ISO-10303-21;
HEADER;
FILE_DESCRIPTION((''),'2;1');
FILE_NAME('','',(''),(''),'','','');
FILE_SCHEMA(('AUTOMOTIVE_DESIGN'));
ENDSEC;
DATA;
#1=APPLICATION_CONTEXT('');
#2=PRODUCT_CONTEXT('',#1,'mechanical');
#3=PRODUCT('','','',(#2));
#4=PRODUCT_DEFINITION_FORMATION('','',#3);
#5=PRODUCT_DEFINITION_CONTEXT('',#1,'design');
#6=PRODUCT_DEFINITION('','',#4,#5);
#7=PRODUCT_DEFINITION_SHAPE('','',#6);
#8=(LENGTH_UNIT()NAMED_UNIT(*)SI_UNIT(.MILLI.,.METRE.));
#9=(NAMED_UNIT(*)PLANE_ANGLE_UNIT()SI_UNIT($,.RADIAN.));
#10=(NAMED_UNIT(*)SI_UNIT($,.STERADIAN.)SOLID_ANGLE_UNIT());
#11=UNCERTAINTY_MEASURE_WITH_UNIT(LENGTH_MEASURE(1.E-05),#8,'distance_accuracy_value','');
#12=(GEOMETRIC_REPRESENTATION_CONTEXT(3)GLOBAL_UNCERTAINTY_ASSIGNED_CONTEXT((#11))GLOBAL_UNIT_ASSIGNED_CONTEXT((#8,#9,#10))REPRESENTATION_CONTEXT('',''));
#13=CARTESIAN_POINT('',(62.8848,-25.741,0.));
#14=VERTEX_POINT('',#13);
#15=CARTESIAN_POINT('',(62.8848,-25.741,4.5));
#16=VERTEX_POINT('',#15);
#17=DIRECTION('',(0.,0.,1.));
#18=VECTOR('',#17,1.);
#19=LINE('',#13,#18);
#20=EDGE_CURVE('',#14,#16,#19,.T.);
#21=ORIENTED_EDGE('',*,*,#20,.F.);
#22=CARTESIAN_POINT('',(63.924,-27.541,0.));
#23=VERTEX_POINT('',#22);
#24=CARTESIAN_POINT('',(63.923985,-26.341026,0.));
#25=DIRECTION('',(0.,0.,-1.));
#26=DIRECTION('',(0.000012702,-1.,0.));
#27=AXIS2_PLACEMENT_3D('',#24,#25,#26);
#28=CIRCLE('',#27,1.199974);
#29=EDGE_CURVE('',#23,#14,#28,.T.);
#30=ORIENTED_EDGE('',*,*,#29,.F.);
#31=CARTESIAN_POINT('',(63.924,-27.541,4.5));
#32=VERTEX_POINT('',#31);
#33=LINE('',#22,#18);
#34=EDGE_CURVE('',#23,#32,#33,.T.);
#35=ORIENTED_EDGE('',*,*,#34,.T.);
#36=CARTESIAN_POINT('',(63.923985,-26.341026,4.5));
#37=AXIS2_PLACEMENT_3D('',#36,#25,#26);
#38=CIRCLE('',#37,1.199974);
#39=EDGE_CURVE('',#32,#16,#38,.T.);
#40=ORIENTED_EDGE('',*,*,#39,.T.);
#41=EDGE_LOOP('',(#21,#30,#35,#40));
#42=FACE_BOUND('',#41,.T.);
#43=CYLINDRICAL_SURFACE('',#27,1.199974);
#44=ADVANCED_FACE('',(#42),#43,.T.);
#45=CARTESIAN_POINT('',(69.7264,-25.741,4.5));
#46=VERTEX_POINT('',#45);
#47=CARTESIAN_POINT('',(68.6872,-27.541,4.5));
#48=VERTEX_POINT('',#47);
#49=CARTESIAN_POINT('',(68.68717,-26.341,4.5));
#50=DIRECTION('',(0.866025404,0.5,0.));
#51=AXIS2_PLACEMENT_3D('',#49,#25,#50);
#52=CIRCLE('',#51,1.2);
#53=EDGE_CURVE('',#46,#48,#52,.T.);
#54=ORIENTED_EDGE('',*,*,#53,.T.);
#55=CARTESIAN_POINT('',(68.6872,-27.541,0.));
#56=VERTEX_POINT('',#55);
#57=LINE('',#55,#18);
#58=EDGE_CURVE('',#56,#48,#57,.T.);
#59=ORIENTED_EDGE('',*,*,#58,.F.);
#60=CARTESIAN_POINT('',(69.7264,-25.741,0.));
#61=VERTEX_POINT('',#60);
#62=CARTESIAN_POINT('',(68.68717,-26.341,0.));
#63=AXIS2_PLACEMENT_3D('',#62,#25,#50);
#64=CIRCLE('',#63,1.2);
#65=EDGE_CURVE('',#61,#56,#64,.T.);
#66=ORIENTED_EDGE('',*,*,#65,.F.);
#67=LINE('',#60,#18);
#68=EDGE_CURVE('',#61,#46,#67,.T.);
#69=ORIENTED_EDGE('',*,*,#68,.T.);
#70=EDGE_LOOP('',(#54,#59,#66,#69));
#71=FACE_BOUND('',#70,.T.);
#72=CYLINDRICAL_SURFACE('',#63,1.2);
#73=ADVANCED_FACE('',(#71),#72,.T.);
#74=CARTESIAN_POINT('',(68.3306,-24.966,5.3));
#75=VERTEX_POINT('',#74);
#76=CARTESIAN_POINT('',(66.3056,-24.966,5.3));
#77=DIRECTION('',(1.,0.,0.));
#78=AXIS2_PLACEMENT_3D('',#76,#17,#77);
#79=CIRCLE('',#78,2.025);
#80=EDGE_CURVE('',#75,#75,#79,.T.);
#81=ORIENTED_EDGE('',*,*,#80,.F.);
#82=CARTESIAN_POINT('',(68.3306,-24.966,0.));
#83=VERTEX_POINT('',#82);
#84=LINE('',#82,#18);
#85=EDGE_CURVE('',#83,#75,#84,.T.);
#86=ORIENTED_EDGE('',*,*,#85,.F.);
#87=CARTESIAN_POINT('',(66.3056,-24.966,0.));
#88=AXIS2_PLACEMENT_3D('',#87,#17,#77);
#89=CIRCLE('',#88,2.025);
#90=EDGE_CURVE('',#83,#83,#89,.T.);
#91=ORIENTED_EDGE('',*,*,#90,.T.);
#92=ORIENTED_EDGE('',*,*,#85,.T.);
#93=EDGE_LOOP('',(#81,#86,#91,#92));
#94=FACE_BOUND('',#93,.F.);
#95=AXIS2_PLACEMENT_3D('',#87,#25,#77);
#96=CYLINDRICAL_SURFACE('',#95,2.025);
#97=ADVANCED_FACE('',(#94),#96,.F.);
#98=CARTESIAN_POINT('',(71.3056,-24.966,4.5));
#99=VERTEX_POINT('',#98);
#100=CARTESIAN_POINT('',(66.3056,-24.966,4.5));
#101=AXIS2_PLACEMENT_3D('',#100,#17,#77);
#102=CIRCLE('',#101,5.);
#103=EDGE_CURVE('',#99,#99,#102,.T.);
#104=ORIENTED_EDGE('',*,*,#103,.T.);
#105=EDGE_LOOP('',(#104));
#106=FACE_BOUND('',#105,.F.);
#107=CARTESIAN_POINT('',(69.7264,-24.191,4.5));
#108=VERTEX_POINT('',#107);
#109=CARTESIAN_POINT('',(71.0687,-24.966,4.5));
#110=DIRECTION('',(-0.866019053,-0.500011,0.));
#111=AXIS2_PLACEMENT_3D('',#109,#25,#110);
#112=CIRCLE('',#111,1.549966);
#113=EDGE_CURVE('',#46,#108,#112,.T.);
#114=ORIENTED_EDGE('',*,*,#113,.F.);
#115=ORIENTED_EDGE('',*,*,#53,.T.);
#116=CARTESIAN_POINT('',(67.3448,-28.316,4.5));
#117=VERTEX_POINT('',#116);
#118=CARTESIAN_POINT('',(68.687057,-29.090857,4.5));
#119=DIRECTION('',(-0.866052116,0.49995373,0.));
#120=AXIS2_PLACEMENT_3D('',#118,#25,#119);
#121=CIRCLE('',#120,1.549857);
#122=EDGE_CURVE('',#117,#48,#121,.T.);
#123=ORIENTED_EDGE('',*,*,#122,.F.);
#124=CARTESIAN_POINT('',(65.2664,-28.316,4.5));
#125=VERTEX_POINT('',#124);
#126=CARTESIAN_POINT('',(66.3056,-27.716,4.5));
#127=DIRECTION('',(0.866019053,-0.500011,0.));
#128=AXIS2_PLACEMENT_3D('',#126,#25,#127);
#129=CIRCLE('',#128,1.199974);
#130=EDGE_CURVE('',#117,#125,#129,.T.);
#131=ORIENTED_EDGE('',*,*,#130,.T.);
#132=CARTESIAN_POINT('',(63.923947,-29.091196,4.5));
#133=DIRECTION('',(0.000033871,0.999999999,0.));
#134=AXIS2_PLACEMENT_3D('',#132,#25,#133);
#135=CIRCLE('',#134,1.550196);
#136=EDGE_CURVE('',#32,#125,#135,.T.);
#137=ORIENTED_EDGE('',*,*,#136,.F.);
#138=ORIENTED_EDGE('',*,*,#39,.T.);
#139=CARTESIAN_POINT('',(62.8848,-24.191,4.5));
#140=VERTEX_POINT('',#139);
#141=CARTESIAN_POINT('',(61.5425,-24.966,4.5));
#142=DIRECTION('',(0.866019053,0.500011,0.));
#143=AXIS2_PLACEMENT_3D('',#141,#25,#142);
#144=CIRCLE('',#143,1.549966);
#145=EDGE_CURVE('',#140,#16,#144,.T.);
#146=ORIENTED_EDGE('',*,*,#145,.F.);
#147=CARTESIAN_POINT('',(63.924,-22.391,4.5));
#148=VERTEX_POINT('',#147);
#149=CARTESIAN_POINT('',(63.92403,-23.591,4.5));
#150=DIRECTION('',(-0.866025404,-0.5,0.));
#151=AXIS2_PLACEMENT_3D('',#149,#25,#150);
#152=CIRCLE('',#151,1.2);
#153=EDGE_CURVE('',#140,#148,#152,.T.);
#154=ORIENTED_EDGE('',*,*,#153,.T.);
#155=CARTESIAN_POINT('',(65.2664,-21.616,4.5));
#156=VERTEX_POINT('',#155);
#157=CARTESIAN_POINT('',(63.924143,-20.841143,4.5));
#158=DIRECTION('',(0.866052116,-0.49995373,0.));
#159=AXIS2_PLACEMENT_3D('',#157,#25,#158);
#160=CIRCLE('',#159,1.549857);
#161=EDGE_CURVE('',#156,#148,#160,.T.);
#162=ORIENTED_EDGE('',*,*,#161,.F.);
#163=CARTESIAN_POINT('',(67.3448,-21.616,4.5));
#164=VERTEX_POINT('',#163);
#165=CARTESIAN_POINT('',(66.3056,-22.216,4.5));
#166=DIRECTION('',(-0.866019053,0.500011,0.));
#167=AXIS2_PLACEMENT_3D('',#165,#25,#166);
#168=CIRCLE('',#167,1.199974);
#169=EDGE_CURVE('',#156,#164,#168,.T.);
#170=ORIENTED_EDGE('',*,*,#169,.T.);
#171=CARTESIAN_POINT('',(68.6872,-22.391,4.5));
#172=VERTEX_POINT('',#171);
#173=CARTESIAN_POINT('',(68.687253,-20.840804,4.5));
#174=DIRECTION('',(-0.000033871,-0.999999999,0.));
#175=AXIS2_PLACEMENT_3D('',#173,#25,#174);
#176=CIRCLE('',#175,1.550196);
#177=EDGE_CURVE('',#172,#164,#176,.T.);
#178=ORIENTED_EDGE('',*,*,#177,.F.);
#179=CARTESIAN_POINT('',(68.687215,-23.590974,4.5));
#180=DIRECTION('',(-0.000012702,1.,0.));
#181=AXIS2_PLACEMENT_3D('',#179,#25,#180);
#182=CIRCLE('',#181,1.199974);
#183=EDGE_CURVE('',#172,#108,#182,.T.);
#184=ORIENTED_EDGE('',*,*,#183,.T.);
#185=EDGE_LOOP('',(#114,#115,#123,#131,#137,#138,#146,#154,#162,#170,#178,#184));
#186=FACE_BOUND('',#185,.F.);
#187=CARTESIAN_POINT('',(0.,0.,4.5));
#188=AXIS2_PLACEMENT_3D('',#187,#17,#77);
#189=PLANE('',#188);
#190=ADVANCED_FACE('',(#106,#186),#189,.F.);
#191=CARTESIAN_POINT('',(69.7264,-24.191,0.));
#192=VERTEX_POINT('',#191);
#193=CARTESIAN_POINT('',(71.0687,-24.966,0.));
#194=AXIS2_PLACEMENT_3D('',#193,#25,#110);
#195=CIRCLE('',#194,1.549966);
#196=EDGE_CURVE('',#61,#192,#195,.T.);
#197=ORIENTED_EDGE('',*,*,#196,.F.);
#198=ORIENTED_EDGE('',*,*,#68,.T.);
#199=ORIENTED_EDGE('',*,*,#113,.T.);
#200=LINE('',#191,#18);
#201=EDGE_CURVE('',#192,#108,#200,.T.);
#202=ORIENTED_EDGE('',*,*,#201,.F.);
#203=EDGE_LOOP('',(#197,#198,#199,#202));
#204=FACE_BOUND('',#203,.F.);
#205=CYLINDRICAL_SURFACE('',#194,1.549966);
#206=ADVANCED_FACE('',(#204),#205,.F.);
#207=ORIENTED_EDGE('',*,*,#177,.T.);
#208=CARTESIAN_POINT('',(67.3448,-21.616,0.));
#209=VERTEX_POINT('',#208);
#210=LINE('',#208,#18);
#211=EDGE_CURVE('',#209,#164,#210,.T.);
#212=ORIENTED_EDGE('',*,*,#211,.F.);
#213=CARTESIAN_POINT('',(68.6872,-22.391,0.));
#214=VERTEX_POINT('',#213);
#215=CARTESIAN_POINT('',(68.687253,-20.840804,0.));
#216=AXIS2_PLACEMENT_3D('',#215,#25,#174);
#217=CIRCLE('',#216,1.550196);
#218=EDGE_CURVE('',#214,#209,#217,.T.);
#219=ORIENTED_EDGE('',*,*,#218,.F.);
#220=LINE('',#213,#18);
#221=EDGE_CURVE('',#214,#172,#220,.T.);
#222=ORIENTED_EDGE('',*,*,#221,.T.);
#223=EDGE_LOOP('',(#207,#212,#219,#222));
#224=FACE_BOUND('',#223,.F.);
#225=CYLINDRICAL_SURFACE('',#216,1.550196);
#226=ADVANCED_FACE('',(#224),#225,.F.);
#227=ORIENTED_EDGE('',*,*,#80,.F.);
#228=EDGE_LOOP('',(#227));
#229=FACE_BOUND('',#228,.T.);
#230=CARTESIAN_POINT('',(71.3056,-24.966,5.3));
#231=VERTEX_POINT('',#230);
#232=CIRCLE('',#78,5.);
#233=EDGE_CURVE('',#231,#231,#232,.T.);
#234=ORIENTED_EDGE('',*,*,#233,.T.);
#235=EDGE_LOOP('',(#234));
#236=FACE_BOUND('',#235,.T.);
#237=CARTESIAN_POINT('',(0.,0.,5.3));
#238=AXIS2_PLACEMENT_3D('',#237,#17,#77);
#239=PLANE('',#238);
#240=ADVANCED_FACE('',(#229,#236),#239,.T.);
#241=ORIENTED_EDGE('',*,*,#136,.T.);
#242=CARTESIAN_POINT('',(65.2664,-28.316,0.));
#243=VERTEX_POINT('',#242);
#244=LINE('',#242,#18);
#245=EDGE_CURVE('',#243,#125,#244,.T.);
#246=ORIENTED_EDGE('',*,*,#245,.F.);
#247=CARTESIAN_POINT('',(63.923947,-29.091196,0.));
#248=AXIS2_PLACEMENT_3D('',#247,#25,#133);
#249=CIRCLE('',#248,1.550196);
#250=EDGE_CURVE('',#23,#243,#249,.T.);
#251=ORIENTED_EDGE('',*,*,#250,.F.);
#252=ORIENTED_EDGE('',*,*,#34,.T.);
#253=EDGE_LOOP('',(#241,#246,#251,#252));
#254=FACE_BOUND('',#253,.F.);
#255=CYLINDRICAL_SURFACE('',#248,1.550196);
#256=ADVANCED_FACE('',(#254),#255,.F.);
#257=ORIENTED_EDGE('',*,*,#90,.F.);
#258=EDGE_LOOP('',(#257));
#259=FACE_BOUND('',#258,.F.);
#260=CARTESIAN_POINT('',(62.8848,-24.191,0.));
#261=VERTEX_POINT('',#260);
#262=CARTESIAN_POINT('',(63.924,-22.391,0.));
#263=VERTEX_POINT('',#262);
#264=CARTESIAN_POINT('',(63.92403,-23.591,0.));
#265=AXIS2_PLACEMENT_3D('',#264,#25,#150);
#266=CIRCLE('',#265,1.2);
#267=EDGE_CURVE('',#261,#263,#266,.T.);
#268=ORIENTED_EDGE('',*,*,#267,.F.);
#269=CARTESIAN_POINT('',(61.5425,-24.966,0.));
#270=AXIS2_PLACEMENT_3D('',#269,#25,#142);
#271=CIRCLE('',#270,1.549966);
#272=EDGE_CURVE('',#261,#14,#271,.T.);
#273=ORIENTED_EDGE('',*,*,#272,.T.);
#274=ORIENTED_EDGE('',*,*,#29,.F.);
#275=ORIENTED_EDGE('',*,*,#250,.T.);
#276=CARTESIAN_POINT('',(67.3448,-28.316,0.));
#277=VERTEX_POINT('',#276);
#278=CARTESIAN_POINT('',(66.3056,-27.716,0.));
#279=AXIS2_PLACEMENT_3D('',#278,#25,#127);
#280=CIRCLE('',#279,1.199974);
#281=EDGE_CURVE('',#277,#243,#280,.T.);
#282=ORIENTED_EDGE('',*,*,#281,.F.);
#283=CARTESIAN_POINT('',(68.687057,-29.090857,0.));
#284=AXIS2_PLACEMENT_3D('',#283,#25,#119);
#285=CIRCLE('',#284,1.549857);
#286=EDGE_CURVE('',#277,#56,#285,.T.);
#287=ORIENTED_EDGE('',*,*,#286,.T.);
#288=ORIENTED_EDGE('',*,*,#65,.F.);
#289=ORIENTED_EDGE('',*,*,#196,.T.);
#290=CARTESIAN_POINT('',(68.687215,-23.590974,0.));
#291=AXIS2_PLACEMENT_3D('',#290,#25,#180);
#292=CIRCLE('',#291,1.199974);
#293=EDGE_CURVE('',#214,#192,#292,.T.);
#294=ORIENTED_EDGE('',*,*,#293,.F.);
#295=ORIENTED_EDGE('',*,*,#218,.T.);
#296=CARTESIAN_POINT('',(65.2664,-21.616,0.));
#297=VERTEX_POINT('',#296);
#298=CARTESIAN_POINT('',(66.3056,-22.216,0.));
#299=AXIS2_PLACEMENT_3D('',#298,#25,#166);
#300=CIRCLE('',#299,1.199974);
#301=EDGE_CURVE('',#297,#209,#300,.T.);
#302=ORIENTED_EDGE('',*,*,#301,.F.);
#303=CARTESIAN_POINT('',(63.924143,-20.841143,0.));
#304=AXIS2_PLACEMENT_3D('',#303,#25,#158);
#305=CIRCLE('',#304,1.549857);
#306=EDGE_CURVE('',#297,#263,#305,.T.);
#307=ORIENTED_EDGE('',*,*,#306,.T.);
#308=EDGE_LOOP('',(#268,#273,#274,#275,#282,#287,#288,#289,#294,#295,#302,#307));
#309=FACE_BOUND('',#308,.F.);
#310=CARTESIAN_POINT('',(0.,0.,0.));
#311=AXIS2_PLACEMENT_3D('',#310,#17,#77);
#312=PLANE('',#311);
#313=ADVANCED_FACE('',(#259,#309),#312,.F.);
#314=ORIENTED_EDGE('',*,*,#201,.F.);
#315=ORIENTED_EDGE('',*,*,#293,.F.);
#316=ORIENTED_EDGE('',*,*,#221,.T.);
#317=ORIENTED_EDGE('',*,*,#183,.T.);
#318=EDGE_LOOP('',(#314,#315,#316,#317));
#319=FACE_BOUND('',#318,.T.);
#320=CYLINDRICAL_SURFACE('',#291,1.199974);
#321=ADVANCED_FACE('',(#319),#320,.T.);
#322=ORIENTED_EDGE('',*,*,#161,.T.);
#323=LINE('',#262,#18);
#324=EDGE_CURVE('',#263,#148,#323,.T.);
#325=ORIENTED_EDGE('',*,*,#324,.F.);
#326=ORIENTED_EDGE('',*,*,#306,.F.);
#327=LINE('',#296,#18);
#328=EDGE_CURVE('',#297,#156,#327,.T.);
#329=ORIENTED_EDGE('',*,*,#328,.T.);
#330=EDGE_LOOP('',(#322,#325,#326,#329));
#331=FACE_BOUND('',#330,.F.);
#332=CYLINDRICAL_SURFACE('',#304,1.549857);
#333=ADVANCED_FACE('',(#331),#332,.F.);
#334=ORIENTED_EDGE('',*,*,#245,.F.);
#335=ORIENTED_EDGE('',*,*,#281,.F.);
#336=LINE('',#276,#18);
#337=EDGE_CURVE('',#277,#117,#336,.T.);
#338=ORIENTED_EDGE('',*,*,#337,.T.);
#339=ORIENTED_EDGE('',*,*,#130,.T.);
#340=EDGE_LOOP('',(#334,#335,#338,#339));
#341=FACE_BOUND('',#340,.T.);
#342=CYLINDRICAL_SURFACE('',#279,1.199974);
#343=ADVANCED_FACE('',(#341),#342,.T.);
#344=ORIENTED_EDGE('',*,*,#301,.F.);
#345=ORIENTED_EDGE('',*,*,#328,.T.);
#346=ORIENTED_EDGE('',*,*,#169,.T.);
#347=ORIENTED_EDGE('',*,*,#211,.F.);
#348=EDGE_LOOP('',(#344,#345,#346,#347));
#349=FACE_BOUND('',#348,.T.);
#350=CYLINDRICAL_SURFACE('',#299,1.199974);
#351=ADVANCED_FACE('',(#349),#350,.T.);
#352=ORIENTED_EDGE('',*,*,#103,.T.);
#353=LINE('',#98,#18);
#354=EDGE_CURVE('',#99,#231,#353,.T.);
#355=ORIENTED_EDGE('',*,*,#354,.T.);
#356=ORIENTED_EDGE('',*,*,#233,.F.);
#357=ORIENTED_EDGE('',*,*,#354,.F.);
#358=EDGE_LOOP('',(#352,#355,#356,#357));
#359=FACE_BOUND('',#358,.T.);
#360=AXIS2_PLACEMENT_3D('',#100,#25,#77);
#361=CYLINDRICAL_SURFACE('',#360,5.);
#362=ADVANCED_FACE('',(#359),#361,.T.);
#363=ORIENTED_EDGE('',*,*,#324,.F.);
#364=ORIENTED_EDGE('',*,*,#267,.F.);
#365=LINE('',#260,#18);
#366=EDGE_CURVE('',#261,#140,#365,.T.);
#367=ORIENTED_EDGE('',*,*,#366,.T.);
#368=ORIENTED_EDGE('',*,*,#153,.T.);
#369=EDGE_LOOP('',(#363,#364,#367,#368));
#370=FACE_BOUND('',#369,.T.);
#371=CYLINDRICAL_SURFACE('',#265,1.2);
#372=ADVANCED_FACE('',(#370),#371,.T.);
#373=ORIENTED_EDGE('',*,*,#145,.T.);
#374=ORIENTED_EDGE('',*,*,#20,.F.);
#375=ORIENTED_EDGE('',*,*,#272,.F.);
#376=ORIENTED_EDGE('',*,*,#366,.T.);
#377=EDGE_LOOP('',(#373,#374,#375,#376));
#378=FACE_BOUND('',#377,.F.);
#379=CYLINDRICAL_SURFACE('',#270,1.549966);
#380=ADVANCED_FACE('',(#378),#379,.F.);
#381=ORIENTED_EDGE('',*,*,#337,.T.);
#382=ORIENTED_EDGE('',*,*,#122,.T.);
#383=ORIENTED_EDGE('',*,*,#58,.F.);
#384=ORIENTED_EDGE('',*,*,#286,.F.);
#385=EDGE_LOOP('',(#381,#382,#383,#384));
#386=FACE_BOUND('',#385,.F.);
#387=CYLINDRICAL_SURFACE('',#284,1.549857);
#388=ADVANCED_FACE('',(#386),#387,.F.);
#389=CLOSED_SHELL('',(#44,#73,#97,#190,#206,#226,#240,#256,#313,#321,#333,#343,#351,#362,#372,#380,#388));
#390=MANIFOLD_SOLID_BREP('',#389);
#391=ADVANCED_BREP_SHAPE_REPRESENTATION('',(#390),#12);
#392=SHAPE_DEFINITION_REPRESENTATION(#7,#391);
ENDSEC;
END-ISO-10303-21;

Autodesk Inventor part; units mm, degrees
ref_plane "YZ Plane" through (0, 0, 0) normal (1, 0, 0) x (0, 1, 0)
ref_plane "XZ Plane" through (0, 0, 0) normal (0, 1, 0) x (-1, 0, 0)
ref_plane "XY Plane" through (0, 0, 0) normal (0, 0, 1) x (1, 0, 0)
sketch "スケッチ1" plane through (0, 0, 0) normal (0, 0, 1) x (1, 0, 0)
  arc A0 (69.7697, -24.216) -> (68.6872, -22.341) centre (68.6872, -23.591) ccw
  arc A1 (69.7697, -24.216) -> (69.7697, -25.716) centre (71.0687, -24.966) ccw
  arc A2 (68.6872, -27.591) -> (69.7697, -25.716) centre (68.6872, -26.341) ccw
  arc A3 (65.2231, -28.341) -> (67.3881, -28.341) centre (66.3056, -27.716) ccw
  arc A4 (68.6872, -27.591) -> (67.3881, -28.341) centre (68.6872, -29.091) ccw
  arc A5 (65.2231, -28.341) -> (63.924, -27.591) centre (63.924, -29.091) ccw
  arc A6 (63.924, -22.341) -> (62.8415, -24.216) centre (63.924, -23.591) ccw
  arc A7 (63.924, -22.341) -> (65.2231, -21.591) centre (63.924, -20.841) ccw
  line L0 (62.8415, -22.966) -> (66.3056, -20.966) construction
  circle A8 centre (66.3056, -24.966) radius 5
  arc A9 (67.3881, -21.591) -> (65.2231, -21.591) centre (66.3056, -22.216) ccw
  arc A10 (62.8415, -25.716) -> (62.8415, -24.216) centre (61.5425, -24.966) ccw
  arc A11 (67.3881, -21.591) -> (68.6872, -22.341) centre (68.6872, -20.841) ccw
  line L1 (62.8415, -26.966) -> (62.8415, -22.966) construction
  arc A12 (62.8415, -25.716) -> (63.924, -27.591) centre (63.924, -26.341) ccw
  line L2 (66.3056, -20.966) -> (69.7697, -22.966) construction
  line L3 (66.3056, -28.966) -> (62.8415, -26.966) construction
  circle A13 centre (66.3056, -24.966) radius 4 construction
  circle A14 centre (66.3056, -24.966) radius 3.2631 construction
  line L4 (69.7697, -26.966) -> (66.3056, -28.966) construction
  line L5 (69.7697, -22.966) -> (69.7697, -26.966) construction
  circle A15 centre (66.3056, -24.966) radius 2.025
  point P0 (0, 0)
  point P1 (69.7697, -26.966)
  point P2 (66.3056, -28.966)
  point P3 (65.2231, -28.341)
  point P4 (68.6872, -27.591)
  point P5 (69.7697, -25.716)
  point P6 (69.7697, -24.216)
  point P7 (63.924, -22.341)
  point P8 (62.8415, -25.716)
  point P9 (63.924, -27.591)
  dimension "d5" = 8
  dimension "d4" = 10
  dimension "d6" = 360
  dimension "d7" = 360
  dimension "d8" = 6.5263
  dimension "d9" = 1.5
  dimension "d10" = 1.25
  dimension "d11" = 4.05
extrude "押し出し1" add sketch "スケッチ1" along normal blind 4.5 contours A1 A2 A4 A3 A5 A12 A10 A6 A7 A9 A11 A0
sketch "スケッチ2" plane through (0, 0, 4.5) normal (0, 0, 1) x (1, 0, 0)
  arc A0 (68.6872, -27.591) -> (67.3881, -28.341) centre (68.6872, -29.091) ccw projected
  arc A1 (68.6872, -27.591) -> (69.7697, -25.716) centre (68.6872, -26.341) ccw projected
  arc A2 (69.7697, -24.216) -> (69.7697, -25.716) centre (71.0687, -24.966) ccw projected
  arc A3 (69.7697, -24.216) -> (68.6872, -22.341) centre (68.6872, -23.591) ccw projected
  arc A4 (67.3881, -21.591) -> (68.6872, -22.341) centre (68.6872, -20.841) ccw projected
  arc A5 (67.3881, -21.591) -> (65.2231, -21.591) centre (66.3056, -22.216) ccw projected
  arc A6 (63.924, -22.341) -> (65.2231, -21.591) centre (63.924, -20.841) ccw projected
  arc A7 (63.924, -22.341) -> (62.8415, -24.216) centre (63.924, -23.591) ccw projected
  arc A8 (62.8415, -25.716) -> (62.8415, -24.216) centre (61.5425, -24.966) ccw projected
  arc A9 (62.8415, -25.716) -> (63.924, -27.591) centre (63.924, -26.341) ccw projected
  arc A10 (65.2231, -28.341) -> (63.924, -27.591) centre (63.924, -29.091) ccw projected
  arc A11 (65.2231, -28.341) -> (67.3881, -28.341) centre (66.3056, -27.716) ccw projected
  circle A12 centre (66.3056, -24.966) radius 2.025 projected
  circle A13 centre (66.3056, -24.966) radius 5
  point P0 (0, 0)
  dimension "d14" = 10
extrude "押し出し2" add sketch "スケッチ2" along normal blind 0.8 contours A0 A11 A10 A9 A8 A7 A6 A5 A4 A3 A2 A1 | A13
sketch "スケッチ3" plane through (0, 0, 0) normal (0, 0, -1) x (-1, 0, 0)
  arc A0 (-67.3881, -28.341) -> (-68.6872, -27.591) centre (-68.6872, -29.091) ccw projected
  arc A1 (-67.3881, -28.341) -> (-65.2231, -28.341) centre (-66.3056, -27.716) ccw projected
  arc A2 (-63.924, -27.591) -> (-65.2231, -28.341) centre (-63.924, -29.091) ccw projected
  arc A3 (-63.924, -27.591) -> (-62.8415, -25.716) centre (-63.924, -26.341) ccw projected
  arc A4 (-62.8415, -24.216) -> (-62.8415, -25.716) centre (-61.5425, -24.966) ccw projected
  arc A5 (-62.8415, -24.216) -> (-63.924, -22.341) centre (-63.924, -23.591) ccw projected
  arc A6 (-65.2231, -21.591) -> (-63.924, -22.341) centre (-63.924, -20.841) ccw projected
  arc A7 (-65.2231, -21.591) -> (-67.3881, -21.591) centre (-66.3056, -22.216) ccw projected
  arc A8 (-68.6872, -22.341) -> (-67.3881, -21.591) centre (-68.6872, -20.841) ccw projected
  arc A9 (-68.6872, -22.341) -> (-69.7697, -24.216) centre (-68.6872, -23.591) ccw projected
  arc A10 (-69.7697, -25.716) -> (-69.7697, -24.216) centre (-71.0687, -24.966) ccw projected
  arc A11 (-69.7697, -25.716) -> (-68.6872, -27.591) centre (-68.6872, -26.341) ccw projected
  circle A12 centre (-66.3056, -24.966) radius 2.025 projected
  arc A13 (-65.2664, -21.616) -> (-67.3448, -21.616) centre (-66.3056, -22.216) ccw
  arc A14 (-65.2664, -21.616) -> (-63.924, -22.391) centre (-63.924, -20.841) ccw
  arc A15 (-62.8848, -24.191) -> (-63.924, -22.391) centre (-63.924, -23.591) ccw
  arc A16 (-62.8848, -24.191) -> (-62.8848, -25.741) centre (-61.5425, -24.966) ccw
  arc A17 (-63.924, -27.541) -> (-62.8848, -25.741) centre (-63.924, -26.341) ccw
  arc A18 (-63.924, -27.541) -> (-65.2664, -28.316) centre (-63.924, -29.091) ccw
  arc A19 (-67.3448, -28.316) -> (-65.2664, -28.316) centre (-66.3056, -27.716) ccw
  arc A20 (-67.3448, -28.316) -> (-68.6872, -27.541) centre (-68.6872, -29.091) ccw
  arc A21 (-69.7264, -25.741) -> (-68.6872, -27.541) centre (-68.6872, -26.341) ccw
  arc A22 (-69.7264, -25.741) -> (-69.7264, -24.191) centre (-71.0687, -24.966) ccw
  arc A23 (-68.6872, -22.391) -> (-69.7264, -24.191) centre (-68.6872, -23.591) ccw
  arc A24 (-68.6872, -22.391) -> (-67.3448, -21.616) centre (-68.6872, -20.841) ccw
  point P0 (0, 0)
  dimension "d17" = 0.05
extrude "押し出し3" cut sketch "スケッチ3" against normal up to surface (4.5 mm away) contours A0 A11 A10 A9 A8 A7 A6 A5 A4 A3 A2 A1
properties part number "2ギア接続部" material "アルミニウム 2014-T4"
